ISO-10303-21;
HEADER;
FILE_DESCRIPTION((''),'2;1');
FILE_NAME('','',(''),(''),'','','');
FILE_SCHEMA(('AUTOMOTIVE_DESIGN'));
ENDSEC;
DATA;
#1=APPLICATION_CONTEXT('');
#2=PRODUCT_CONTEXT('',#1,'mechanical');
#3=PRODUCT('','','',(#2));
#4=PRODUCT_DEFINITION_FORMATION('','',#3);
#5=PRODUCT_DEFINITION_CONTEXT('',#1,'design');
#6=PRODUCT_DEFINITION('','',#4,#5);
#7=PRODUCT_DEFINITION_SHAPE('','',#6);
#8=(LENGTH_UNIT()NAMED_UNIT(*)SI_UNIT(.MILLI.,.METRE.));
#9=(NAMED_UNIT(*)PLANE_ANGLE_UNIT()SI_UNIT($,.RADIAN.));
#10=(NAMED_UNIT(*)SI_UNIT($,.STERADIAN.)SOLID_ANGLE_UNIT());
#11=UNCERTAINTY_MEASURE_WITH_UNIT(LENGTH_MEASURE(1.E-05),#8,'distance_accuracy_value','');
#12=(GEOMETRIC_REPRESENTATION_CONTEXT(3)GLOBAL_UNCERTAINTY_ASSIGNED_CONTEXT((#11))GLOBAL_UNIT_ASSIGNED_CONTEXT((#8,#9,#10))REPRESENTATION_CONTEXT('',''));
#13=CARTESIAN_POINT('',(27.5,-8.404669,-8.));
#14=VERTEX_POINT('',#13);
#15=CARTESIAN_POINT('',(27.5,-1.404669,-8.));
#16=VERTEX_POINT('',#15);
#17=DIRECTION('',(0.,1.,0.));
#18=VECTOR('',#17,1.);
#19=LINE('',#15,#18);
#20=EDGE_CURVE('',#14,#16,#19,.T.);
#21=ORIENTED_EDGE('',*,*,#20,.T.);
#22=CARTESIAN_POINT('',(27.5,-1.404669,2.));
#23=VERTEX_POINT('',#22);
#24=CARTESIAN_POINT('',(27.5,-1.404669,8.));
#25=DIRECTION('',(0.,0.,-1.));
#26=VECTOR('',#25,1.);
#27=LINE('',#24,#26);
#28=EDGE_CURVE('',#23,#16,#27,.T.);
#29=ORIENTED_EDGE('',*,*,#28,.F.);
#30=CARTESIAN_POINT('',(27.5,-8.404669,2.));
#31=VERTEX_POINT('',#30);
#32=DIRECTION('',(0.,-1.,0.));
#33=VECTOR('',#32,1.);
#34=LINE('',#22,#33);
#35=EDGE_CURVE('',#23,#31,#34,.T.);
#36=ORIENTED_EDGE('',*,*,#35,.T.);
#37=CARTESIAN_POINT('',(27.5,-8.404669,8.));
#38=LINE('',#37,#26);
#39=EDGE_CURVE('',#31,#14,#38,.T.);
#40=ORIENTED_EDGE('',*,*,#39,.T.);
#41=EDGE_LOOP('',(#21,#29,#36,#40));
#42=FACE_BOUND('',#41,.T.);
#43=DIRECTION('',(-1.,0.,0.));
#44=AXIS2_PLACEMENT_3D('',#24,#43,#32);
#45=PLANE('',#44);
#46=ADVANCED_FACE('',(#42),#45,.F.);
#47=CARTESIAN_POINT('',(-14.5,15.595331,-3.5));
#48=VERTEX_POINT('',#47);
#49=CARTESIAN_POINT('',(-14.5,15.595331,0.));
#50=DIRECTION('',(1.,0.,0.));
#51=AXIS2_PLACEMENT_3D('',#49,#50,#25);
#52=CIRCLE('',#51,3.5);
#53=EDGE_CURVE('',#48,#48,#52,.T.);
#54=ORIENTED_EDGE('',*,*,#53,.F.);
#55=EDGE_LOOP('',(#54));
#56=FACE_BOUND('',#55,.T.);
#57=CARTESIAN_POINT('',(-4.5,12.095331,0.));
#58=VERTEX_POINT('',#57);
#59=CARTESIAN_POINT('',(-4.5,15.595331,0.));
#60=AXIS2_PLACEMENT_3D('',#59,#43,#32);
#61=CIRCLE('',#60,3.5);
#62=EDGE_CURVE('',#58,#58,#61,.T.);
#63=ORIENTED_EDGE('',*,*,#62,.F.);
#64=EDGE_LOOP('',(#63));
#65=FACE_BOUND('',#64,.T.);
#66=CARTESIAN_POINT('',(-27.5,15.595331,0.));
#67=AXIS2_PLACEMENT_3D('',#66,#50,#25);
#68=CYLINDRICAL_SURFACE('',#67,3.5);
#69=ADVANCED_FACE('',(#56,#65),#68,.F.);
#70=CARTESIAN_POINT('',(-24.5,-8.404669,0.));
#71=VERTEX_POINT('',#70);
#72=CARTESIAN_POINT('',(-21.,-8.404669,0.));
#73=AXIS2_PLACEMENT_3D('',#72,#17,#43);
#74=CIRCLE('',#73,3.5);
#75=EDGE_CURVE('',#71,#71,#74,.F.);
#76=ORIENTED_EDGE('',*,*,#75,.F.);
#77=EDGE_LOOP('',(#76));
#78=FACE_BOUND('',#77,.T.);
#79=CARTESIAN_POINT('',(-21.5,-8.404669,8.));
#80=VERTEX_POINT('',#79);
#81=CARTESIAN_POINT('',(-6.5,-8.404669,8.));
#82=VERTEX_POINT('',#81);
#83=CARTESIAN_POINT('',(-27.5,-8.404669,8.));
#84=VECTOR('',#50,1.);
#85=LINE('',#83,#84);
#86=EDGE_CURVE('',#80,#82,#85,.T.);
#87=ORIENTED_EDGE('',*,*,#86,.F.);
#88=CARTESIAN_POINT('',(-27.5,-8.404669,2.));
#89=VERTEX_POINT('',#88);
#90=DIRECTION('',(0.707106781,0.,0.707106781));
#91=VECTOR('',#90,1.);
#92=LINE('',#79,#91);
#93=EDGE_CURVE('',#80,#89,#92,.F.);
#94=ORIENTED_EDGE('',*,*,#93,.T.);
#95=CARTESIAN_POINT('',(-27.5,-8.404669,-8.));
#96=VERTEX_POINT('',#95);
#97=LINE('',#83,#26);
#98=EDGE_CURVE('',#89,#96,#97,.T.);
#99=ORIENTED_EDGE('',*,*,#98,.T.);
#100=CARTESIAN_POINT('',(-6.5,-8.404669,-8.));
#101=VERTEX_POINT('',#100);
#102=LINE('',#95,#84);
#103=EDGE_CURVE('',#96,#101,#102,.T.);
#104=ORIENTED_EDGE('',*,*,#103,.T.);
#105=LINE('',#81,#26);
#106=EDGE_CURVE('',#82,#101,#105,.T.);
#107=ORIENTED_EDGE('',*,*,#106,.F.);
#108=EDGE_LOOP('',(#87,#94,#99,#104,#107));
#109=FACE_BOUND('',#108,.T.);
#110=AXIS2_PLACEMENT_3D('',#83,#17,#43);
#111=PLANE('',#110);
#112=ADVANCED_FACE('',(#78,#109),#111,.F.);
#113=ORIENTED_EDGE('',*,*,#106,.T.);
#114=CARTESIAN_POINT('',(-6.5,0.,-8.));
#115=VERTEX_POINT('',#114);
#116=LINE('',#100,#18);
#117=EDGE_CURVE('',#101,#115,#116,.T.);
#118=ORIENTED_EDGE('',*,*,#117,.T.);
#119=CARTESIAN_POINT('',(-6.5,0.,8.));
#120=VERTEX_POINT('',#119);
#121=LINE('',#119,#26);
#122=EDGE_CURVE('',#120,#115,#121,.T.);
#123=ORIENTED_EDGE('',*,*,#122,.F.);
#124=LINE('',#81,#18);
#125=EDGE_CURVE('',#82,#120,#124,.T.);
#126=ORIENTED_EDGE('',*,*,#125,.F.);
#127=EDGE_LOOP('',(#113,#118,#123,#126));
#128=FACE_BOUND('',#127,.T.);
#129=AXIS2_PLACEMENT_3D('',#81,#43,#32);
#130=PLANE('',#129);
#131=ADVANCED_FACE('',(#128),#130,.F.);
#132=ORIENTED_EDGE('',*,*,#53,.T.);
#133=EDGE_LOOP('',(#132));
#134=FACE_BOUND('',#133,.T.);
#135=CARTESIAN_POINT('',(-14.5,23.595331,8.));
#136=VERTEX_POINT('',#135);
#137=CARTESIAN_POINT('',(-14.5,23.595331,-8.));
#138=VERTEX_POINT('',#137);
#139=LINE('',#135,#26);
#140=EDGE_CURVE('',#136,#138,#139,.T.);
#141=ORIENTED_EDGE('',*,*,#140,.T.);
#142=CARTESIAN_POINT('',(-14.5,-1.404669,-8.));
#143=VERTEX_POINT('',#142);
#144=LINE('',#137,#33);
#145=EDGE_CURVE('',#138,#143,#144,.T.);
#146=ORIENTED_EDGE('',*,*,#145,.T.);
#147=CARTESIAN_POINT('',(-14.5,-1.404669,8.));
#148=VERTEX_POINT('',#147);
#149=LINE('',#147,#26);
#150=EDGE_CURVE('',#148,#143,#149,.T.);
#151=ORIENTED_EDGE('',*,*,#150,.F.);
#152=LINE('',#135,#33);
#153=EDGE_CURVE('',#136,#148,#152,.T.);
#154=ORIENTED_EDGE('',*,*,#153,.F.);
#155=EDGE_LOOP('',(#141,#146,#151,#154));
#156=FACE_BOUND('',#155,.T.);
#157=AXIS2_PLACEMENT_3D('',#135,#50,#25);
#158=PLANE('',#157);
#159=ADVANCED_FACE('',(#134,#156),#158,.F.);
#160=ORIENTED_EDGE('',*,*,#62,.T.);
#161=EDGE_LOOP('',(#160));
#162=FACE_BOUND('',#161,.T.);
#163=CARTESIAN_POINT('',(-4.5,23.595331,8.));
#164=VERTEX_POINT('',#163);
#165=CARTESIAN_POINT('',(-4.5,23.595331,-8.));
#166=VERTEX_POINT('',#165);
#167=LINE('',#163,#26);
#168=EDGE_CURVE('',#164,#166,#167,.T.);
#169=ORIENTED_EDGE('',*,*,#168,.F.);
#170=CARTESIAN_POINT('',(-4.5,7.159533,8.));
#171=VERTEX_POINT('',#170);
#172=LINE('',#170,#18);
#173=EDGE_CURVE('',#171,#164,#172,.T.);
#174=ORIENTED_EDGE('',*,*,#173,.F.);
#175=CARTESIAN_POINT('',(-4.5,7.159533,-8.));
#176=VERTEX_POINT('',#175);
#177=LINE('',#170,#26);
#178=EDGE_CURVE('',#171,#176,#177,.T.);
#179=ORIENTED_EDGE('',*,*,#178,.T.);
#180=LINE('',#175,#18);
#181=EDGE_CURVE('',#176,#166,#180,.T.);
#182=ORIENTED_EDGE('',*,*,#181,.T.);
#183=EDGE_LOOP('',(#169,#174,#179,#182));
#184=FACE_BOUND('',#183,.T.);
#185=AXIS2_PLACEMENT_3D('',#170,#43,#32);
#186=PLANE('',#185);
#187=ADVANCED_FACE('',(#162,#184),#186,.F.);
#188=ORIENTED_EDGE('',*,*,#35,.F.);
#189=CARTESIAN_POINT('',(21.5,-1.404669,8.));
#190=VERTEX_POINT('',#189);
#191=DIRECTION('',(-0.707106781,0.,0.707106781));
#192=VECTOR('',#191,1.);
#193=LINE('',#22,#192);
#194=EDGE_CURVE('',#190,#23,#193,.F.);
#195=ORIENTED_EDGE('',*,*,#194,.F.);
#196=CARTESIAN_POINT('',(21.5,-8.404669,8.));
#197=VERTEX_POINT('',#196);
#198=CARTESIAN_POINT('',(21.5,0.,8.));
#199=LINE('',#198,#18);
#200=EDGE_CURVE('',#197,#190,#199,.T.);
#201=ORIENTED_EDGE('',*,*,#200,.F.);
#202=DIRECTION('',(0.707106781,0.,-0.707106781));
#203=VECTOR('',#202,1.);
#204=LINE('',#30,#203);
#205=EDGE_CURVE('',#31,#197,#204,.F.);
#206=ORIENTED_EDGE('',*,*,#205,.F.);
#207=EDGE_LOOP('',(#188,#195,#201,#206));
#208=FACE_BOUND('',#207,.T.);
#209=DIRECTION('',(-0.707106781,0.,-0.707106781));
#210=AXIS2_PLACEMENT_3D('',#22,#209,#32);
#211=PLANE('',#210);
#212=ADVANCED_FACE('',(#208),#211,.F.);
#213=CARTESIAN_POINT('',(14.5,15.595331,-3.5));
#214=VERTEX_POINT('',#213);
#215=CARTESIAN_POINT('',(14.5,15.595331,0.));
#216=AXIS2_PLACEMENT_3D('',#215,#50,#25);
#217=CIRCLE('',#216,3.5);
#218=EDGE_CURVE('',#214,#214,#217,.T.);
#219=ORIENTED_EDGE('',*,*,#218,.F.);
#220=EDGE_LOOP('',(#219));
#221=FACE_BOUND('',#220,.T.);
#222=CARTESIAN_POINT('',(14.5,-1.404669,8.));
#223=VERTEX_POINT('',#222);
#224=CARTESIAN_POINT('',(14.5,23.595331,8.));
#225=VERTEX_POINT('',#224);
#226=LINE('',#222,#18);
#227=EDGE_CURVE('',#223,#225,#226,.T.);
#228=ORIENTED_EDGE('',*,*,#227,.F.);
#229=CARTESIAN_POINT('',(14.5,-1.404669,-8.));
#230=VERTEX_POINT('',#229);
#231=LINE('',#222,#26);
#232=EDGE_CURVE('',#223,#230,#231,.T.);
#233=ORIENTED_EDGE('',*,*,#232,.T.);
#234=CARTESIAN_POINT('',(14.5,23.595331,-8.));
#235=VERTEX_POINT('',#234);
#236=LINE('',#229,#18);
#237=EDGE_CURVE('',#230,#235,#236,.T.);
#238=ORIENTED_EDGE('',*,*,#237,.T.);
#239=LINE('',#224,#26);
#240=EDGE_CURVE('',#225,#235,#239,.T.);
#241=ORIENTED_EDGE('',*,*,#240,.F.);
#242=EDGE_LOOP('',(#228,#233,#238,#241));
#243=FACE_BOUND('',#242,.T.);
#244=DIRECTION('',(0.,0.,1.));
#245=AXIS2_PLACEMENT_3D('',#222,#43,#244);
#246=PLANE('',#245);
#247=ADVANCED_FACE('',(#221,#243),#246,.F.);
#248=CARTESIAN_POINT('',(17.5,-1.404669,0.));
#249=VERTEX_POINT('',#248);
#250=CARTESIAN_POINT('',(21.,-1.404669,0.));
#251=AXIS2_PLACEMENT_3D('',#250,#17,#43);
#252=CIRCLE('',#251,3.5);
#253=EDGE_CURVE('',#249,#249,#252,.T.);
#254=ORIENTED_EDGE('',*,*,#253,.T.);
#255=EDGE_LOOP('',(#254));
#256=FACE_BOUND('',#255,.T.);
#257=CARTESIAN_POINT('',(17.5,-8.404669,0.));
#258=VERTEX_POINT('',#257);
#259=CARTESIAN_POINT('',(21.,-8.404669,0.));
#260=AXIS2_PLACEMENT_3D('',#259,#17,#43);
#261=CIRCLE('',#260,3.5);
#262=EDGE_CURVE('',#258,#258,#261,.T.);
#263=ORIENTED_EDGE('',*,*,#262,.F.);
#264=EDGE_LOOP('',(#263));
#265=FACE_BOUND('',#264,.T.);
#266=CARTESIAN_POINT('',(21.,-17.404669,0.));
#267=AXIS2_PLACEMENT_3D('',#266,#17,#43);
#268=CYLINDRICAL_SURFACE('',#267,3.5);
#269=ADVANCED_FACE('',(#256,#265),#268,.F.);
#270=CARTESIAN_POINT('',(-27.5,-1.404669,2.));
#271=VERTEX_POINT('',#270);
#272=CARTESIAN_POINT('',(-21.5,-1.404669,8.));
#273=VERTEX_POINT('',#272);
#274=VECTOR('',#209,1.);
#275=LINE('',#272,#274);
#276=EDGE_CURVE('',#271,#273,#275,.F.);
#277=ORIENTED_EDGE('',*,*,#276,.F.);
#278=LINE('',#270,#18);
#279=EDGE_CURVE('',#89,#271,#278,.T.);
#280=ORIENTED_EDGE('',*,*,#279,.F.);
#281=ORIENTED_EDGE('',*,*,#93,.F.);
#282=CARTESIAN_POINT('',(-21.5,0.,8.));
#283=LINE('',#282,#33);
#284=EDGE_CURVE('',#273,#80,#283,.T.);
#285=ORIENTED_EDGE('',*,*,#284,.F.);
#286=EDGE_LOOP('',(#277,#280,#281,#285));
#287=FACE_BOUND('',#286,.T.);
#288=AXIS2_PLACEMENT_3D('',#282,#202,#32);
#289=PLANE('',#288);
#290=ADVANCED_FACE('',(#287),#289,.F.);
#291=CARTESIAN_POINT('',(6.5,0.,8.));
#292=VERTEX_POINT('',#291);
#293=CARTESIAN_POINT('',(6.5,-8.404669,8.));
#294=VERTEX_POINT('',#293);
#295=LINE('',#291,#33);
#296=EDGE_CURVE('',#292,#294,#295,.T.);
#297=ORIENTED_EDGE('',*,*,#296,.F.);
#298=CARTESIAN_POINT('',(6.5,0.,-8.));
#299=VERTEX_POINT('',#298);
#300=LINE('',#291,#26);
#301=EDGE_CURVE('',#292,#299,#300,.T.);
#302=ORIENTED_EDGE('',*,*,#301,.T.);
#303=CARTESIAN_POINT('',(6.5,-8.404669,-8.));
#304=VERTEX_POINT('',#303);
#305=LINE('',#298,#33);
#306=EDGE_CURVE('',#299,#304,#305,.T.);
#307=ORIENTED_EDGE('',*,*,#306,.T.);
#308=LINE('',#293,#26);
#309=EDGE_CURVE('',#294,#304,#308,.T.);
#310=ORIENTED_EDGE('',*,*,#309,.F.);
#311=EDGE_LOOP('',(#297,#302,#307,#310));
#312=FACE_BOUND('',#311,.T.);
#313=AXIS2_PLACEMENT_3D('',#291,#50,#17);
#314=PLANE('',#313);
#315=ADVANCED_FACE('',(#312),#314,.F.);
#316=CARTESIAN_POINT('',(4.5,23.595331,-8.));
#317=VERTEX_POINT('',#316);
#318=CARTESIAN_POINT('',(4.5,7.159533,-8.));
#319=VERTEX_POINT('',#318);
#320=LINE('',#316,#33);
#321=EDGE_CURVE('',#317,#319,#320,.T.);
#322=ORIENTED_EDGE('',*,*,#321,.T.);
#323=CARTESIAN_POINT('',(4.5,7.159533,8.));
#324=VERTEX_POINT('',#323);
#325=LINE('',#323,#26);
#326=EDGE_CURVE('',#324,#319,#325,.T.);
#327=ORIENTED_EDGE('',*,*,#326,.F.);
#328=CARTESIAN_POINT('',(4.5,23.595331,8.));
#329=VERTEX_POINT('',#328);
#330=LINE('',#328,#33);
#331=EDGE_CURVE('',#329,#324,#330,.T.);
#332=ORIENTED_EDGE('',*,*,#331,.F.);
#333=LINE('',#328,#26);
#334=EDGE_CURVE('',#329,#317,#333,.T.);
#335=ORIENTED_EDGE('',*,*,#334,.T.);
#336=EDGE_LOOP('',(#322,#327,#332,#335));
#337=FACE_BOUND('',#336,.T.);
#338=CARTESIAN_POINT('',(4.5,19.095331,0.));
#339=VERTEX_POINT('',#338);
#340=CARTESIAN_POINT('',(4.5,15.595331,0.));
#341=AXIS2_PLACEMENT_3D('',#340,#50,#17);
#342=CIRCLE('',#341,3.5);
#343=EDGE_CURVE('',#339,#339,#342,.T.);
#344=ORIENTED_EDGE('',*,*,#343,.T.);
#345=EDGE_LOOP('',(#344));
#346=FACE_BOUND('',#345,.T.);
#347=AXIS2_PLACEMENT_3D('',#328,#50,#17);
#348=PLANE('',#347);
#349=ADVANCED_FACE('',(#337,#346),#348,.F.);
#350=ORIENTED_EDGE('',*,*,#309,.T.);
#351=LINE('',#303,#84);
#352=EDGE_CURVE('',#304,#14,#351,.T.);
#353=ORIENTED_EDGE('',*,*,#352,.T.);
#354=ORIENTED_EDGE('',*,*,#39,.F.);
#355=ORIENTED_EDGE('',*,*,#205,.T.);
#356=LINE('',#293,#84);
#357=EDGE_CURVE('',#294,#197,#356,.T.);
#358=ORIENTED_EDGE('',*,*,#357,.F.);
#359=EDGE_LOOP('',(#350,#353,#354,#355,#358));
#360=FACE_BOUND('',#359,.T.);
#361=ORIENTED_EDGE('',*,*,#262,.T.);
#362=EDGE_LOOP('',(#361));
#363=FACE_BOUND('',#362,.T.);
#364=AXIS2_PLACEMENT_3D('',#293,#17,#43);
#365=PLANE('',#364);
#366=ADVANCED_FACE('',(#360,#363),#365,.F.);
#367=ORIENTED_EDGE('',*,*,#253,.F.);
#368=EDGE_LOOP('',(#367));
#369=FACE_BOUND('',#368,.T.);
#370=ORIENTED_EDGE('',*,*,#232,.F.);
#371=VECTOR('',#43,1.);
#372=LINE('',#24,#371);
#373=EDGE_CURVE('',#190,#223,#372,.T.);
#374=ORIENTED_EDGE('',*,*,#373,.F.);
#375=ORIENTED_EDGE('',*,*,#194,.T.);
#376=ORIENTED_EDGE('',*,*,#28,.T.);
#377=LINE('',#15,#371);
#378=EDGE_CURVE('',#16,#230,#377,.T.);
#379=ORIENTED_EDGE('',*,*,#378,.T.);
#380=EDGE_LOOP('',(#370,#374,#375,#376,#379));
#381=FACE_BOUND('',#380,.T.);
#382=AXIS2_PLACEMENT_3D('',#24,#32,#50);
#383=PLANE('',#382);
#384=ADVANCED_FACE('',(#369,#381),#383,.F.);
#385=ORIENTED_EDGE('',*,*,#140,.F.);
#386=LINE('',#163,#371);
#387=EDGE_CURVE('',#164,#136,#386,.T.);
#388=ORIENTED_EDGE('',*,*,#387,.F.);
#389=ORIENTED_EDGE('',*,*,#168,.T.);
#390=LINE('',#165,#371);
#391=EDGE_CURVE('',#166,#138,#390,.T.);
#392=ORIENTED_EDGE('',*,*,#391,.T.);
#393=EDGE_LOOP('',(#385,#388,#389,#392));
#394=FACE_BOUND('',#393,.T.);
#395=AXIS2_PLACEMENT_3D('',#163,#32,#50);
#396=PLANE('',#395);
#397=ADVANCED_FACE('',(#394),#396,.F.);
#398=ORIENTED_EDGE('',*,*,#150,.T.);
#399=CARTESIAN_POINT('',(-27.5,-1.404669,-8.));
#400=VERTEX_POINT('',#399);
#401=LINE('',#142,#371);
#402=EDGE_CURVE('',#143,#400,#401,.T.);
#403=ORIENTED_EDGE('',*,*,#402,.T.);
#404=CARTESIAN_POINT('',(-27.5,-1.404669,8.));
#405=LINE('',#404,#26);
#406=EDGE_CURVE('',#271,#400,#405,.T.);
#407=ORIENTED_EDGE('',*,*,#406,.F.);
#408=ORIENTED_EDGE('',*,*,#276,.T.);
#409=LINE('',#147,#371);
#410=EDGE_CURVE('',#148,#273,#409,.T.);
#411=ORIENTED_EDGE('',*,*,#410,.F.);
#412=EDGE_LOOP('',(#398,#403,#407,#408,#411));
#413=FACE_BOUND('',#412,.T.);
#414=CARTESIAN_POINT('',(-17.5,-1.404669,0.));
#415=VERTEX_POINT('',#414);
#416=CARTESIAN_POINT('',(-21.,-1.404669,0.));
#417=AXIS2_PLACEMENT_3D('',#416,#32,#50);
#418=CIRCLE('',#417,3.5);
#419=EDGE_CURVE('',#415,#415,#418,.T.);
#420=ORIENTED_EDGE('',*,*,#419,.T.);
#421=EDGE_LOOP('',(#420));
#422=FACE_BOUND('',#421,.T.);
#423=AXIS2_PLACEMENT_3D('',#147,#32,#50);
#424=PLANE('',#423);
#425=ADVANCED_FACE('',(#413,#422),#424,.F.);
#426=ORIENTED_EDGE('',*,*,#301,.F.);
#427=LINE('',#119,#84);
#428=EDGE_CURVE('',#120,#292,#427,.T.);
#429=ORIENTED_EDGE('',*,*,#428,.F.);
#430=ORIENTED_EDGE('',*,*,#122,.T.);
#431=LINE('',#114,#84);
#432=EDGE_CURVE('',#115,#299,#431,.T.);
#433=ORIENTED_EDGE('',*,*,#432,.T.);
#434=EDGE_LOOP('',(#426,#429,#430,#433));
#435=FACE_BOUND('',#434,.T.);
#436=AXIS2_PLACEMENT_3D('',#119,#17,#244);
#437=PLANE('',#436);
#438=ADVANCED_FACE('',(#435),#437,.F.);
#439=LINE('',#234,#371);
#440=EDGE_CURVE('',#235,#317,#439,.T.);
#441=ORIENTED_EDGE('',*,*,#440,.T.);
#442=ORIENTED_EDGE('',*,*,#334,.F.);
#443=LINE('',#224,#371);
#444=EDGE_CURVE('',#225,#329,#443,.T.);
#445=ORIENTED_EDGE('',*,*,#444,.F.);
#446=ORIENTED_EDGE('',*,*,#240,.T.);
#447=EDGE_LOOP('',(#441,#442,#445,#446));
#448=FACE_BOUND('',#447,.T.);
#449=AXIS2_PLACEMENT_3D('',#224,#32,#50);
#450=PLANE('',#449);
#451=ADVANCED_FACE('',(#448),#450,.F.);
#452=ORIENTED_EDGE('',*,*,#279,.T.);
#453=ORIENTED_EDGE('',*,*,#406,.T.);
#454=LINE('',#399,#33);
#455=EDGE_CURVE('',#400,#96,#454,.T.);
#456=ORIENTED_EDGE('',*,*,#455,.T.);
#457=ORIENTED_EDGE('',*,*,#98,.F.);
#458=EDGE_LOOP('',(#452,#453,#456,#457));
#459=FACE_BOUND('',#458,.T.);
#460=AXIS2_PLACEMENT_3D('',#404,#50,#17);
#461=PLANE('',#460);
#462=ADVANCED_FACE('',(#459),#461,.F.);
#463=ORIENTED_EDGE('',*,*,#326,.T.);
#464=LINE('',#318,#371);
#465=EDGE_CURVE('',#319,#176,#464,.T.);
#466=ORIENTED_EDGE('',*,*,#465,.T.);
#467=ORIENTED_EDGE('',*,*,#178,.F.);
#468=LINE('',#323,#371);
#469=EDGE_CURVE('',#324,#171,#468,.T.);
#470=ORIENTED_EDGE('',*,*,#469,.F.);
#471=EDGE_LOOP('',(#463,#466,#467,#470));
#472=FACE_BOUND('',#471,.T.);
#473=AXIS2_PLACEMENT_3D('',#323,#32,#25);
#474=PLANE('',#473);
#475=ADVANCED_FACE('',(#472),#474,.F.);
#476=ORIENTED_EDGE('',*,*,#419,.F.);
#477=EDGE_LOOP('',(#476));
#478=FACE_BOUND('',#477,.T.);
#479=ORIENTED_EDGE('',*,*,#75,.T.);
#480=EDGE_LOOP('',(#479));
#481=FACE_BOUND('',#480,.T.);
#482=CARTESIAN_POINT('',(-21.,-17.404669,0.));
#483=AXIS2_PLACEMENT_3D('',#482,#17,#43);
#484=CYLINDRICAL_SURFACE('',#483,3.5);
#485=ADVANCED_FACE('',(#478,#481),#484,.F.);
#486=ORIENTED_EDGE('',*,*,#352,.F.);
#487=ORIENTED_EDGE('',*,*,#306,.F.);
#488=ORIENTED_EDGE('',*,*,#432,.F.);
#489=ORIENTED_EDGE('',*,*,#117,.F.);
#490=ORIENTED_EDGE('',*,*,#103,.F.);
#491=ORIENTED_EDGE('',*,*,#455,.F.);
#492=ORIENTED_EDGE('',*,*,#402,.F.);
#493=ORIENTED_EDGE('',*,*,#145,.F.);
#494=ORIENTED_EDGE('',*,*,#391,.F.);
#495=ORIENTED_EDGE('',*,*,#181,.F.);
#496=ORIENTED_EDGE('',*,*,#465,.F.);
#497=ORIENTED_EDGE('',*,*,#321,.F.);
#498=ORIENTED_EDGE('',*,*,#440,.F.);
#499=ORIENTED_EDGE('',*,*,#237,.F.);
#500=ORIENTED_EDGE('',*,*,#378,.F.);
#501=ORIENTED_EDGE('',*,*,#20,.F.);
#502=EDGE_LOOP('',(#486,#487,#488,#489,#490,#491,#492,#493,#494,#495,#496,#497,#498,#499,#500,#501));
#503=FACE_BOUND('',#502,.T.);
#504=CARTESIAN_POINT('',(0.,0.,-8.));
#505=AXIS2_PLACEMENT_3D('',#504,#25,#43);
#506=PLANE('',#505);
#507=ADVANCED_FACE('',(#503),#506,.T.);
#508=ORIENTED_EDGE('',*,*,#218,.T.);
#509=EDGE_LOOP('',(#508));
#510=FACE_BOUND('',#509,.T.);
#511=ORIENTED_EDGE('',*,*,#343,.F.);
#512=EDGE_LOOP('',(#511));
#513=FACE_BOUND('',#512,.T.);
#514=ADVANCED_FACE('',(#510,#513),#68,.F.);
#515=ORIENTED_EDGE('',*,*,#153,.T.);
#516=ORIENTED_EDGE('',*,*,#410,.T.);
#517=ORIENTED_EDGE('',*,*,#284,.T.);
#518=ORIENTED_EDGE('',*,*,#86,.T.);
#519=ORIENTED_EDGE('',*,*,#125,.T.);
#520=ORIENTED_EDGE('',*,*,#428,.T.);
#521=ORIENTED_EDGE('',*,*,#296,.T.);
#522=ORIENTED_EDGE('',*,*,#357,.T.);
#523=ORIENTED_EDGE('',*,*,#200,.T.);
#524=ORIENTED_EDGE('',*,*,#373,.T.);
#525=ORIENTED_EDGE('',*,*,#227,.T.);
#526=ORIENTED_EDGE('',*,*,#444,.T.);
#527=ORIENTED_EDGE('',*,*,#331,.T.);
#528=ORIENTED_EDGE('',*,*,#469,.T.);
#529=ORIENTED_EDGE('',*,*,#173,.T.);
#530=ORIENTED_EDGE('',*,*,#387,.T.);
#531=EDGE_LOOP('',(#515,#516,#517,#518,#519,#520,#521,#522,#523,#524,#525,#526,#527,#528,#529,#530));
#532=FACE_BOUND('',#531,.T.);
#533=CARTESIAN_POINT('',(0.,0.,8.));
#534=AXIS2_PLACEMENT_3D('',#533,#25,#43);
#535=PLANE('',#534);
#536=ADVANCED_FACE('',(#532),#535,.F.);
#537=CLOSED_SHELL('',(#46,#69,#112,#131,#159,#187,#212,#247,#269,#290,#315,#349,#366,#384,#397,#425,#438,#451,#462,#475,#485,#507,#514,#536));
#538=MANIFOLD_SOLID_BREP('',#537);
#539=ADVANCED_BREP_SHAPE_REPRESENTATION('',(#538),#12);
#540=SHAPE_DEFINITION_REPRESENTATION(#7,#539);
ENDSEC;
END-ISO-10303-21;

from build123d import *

# Parameters (mm, degrees)
BOSS_EXTRUDE1_DEPTH = 8
CHAMFER2_START      = 20.859650045
CHAMFER2_OUTLINE_W  = 12
CHAMFER2_OUTLINE_H  = 7
CHAMFER2_DEPTH      = 5.140349955
CHAMFER3_START      = -26
CHAMFER3_OUTLINE_W  = 12
CHAMFER3_OUTLINE_H  = 7
CHAMFER3_DEPTH      = 5.140349955
SKETCH2_R           = 3.5
CUT_EXTRUDE1_DEPTH  = 16
SKETCH3_R           = 3.5
CUT_EXTRUDE2_DEPTH  = 49.833796009


with BuildPart() as part:
    # Sketch1 → Boss-Extrude1 (new, symmetric)
    with BuildSketch(Plane.XY):
        Polygon((-6.5, 0), (6.5, 0), (6.5, -8.404669261), (27.5, -8.404669261), (27.5, -1.404669261), (14.5, -1.404669261), (14.5, 23.595330739), (4.5, 23.595330739), (4.5, 7.159533074), (-4.5, 7.159533074), (-4.5, 23.595330739), (-14.5, 23.595330739), (-14.5, -1.404669261), (-27.5, -1.404669261), (-27.5, -8.404669261), (-6.5, -8.404669261), align=None)
    extrude(amount=BOSS_EXTRUDE1_DEPTH, both=True)

    # Chamfer2: read off the stored shape, not the designer's step
    # Chamfer2 outline → Chamfer2 (cut)
    with BuildSketch(Plane(origin=(0, 0, 0), x_dir=(0.7071067811865474, 0, -0.7071067811865477), z_dir=(0.7071067811865476, 0, 0.7071067811865476)).offset(CHAMFER2_START)):
        with Locations((14, -4.904669261)):
            Rectangle(CHAMFER2_OUTLINE_W, CHAMFER2_OUTLINE_H)
    extrude(amount=CHAMFER2_DEPTH, mode=Mode.SUBTRACT)

    # Chamfer3: read off the stored shape, not the designer's step
    # Chamfer3 outline → Chamfer3 (cut)
    with BuildSketch(Plane(origin=(0, 0, 0), x_dir=(0.707106781186548, 0, 0.707106781186547), z_dir=(0.707106781186547, 0, -0.707106781186548)).offset(CHAMFER3_START)):
        with Locations((-14, 4.904669261)):
            Rectangle(CHAMFER3_OUTLINE_W, CHAMFER3_OUTLINE_H)
    extrude(amount=CHAMFER3_DEPTH, mode=Mode.SUBTRACT)

    # Sketch2 → Cut-Extrude1 (cut)
    with BuildSketch(Plane(origin=(0, -1.404669261, 0), x_dir=(1, 0, 0), z_dir=(0, 1, 0))):
        with Locations(Location((21, 0, 0), (0, 0, 180))):
            Circle(SKETCH2_R)
    cut_extrude1 = extrude(amount=-CUT_EXTRUDE1_DEPTH, mode=Mode.SUBTRACT)

    # Mirror1: Cut-Extrude1 across plane
    add(cut_extrude1.mirror(Plane(origin=(0, 0, 0), x_dir=(0, 0, 1), z_dir=(1, 0, 0))), mode=Mode.SUBTRACT)

    # Sketch3 → Cut-Extrude2 (cut, through all)
    with BuildSketch(Plane(origin=(14.5, 0, 0), x_dir=(0, 0, -1), z_dir=(1, 0, 0))):
        with Locations((0, 15.595330739)):
            Circle(SKETCH3_R)
    extrude(amount=-CUT_EXTRUDE2_DEPTH, mode=Mode.SUBTRACT)


solid = part.part
